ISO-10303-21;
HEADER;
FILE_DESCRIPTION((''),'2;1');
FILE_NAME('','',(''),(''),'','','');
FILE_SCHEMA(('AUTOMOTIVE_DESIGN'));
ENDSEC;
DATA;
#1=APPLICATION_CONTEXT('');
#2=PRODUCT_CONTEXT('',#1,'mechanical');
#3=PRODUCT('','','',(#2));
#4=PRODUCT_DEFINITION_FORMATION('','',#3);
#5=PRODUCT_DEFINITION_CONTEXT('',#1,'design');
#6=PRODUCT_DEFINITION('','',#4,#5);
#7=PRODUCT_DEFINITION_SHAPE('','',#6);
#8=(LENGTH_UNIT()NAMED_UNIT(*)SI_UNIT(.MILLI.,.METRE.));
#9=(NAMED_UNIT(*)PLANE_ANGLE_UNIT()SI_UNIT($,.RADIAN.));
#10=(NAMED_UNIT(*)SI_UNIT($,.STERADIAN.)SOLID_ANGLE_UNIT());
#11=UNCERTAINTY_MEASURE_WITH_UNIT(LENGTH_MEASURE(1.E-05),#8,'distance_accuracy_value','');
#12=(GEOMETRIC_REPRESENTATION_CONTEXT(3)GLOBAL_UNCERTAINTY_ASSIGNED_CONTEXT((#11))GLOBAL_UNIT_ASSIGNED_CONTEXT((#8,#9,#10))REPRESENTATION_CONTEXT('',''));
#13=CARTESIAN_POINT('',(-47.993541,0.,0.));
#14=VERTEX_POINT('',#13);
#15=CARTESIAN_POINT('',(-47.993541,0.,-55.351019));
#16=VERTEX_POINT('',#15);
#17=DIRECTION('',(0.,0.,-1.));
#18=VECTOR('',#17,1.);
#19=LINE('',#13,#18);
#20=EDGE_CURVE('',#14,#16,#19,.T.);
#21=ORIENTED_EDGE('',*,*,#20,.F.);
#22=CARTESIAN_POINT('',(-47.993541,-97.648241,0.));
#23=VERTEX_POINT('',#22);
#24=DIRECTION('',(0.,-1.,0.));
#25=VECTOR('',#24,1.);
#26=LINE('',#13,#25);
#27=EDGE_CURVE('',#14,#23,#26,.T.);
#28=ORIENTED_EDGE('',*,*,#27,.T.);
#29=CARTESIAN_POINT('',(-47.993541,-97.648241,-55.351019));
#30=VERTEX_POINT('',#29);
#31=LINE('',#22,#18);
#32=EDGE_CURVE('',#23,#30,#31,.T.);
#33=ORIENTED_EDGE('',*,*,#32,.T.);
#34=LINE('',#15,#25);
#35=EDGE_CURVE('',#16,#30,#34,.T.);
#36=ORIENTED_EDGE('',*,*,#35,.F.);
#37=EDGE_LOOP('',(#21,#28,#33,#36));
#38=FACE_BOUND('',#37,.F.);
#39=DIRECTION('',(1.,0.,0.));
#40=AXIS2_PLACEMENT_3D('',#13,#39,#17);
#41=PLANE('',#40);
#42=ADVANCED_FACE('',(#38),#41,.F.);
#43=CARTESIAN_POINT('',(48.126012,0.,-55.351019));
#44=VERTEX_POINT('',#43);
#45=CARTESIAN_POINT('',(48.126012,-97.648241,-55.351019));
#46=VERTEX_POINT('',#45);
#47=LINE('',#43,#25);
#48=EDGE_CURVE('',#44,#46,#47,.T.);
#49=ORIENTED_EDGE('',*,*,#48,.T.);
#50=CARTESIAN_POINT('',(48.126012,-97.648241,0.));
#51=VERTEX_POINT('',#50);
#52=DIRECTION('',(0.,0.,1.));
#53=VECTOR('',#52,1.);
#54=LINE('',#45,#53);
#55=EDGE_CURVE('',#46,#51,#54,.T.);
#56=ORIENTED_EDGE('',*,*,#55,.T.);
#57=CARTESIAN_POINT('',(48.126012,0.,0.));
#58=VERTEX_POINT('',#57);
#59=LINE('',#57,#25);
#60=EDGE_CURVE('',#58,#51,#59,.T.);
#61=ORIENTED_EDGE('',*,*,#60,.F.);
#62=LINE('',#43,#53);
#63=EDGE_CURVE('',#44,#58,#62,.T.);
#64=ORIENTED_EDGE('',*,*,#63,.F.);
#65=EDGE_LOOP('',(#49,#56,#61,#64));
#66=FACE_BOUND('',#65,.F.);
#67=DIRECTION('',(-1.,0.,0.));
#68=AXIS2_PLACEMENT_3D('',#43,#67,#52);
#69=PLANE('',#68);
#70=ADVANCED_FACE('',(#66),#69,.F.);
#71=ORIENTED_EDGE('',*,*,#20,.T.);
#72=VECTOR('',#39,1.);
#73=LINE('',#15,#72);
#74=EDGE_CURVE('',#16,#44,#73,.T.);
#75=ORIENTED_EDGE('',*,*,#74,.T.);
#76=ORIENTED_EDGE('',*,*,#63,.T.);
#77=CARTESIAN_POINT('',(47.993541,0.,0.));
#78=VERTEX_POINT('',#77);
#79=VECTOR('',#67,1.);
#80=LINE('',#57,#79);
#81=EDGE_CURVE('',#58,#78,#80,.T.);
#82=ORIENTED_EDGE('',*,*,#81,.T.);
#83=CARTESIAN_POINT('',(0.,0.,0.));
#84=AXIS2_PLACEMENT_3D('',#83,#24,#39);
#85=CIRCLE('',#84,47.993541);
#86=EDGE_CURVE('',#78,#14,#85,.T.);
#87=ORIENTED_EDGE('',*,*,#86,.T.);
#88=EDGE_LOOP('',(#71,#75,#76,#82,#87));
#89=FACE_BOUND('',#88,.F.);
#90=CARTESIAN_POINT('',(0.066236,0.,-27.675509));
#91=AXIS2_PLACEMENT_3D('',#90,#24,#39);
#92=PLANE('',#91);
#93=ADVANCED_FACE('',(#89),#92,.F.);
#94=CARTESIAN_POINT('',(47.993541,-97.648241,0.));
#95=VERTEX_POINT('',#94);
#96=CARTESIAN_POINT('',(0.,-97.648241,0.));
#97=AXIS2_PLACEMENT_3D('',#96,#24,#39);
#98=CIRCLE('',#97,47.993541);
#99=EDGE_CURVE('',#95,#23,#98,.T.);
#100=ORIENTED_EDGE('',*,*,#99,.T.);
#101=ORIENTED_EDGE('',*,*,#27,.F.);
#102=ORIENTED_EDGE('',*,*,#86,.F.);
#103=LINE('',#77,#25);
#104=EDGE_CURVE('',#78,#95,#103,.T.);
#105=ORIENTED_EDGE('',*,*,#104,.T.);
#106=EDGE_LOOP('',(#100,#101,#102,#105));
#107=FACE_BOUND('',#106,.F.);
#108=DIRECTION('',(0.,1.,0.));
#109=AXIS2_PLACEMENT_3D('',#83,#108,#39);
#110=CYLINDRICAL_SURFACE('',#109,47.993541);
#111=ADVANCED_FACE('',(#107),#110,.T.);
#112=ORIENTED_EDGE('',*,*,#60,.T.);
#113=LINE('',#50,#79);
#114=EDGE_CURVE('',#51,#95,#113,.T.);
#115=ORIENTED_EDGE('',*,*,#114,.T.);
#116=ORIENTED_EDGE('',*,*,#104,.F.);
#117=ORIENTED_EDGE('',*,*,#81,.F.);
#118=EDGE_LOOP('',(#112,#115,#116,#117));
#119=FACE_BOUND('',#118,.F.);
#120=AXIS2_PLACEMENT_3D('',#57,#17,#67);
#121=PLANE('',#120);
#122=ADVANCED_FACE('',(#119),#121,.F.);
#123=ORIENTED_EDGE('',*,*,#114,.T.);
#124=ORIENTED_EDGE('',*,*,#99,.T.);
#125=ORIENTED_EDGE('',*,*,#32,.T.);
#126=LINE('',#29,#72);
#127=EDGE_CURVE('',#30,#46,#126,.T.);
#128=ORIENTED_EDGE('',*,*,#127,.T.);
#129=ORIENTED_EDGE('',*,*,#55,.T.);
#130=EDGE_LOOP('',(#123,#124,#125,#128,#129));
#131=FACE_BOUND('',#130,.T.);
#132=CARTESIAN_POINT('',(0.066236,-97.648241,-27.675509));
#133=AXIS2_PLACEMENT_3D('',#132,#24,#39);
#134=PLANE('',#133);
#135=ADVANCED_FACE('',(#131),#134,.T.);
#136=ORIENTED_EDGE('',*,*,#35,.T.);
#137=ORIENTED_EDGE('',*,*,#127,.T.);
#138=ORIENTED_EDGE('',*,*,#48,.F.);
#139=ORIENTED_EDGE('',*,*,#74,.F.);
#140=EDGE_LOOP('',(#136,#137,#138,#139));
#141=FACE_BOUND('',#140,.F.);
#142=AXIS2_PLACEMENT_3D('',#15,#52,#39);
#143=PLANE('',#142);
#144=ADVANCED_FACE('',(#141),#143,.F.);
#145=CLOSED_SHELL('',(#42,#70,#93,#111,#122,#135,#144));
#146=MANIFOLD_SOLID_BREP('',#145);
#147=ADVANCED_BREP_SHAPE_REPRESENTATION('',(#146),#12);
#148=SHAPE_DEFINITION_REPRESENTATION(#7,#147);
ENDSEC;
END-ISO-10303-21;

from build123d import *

# Parameters (mm, degrees)
F1_DEPTH = 97.6482406259


# Not quite as in the source:
# - the program builds the solid bodies; features that only make, move or delete a surface that nothing else refers to are left out


with BuildPart() as f1:
    # F0 (on Front) → F1 (new body)
    with BuildSketch(Plane.XZ):
        Polygon((47.9935407639, 0), (-47.9935407639, 0), (-47.9935407639, -55.3510189056), (48.1260120869, -55.3510189056), (48.1260120869, 0), align=None)
        with BuildLine():
            ThreePointArc((47.9935407639, 0), (0, 47.9935407639), (-47.9935407639, 0))
            Line((-47.9935407639, 0), (47.9935407639, 0))
        make_face()
    extrude(amount=F1_DEPTH)


solid = f1.part
